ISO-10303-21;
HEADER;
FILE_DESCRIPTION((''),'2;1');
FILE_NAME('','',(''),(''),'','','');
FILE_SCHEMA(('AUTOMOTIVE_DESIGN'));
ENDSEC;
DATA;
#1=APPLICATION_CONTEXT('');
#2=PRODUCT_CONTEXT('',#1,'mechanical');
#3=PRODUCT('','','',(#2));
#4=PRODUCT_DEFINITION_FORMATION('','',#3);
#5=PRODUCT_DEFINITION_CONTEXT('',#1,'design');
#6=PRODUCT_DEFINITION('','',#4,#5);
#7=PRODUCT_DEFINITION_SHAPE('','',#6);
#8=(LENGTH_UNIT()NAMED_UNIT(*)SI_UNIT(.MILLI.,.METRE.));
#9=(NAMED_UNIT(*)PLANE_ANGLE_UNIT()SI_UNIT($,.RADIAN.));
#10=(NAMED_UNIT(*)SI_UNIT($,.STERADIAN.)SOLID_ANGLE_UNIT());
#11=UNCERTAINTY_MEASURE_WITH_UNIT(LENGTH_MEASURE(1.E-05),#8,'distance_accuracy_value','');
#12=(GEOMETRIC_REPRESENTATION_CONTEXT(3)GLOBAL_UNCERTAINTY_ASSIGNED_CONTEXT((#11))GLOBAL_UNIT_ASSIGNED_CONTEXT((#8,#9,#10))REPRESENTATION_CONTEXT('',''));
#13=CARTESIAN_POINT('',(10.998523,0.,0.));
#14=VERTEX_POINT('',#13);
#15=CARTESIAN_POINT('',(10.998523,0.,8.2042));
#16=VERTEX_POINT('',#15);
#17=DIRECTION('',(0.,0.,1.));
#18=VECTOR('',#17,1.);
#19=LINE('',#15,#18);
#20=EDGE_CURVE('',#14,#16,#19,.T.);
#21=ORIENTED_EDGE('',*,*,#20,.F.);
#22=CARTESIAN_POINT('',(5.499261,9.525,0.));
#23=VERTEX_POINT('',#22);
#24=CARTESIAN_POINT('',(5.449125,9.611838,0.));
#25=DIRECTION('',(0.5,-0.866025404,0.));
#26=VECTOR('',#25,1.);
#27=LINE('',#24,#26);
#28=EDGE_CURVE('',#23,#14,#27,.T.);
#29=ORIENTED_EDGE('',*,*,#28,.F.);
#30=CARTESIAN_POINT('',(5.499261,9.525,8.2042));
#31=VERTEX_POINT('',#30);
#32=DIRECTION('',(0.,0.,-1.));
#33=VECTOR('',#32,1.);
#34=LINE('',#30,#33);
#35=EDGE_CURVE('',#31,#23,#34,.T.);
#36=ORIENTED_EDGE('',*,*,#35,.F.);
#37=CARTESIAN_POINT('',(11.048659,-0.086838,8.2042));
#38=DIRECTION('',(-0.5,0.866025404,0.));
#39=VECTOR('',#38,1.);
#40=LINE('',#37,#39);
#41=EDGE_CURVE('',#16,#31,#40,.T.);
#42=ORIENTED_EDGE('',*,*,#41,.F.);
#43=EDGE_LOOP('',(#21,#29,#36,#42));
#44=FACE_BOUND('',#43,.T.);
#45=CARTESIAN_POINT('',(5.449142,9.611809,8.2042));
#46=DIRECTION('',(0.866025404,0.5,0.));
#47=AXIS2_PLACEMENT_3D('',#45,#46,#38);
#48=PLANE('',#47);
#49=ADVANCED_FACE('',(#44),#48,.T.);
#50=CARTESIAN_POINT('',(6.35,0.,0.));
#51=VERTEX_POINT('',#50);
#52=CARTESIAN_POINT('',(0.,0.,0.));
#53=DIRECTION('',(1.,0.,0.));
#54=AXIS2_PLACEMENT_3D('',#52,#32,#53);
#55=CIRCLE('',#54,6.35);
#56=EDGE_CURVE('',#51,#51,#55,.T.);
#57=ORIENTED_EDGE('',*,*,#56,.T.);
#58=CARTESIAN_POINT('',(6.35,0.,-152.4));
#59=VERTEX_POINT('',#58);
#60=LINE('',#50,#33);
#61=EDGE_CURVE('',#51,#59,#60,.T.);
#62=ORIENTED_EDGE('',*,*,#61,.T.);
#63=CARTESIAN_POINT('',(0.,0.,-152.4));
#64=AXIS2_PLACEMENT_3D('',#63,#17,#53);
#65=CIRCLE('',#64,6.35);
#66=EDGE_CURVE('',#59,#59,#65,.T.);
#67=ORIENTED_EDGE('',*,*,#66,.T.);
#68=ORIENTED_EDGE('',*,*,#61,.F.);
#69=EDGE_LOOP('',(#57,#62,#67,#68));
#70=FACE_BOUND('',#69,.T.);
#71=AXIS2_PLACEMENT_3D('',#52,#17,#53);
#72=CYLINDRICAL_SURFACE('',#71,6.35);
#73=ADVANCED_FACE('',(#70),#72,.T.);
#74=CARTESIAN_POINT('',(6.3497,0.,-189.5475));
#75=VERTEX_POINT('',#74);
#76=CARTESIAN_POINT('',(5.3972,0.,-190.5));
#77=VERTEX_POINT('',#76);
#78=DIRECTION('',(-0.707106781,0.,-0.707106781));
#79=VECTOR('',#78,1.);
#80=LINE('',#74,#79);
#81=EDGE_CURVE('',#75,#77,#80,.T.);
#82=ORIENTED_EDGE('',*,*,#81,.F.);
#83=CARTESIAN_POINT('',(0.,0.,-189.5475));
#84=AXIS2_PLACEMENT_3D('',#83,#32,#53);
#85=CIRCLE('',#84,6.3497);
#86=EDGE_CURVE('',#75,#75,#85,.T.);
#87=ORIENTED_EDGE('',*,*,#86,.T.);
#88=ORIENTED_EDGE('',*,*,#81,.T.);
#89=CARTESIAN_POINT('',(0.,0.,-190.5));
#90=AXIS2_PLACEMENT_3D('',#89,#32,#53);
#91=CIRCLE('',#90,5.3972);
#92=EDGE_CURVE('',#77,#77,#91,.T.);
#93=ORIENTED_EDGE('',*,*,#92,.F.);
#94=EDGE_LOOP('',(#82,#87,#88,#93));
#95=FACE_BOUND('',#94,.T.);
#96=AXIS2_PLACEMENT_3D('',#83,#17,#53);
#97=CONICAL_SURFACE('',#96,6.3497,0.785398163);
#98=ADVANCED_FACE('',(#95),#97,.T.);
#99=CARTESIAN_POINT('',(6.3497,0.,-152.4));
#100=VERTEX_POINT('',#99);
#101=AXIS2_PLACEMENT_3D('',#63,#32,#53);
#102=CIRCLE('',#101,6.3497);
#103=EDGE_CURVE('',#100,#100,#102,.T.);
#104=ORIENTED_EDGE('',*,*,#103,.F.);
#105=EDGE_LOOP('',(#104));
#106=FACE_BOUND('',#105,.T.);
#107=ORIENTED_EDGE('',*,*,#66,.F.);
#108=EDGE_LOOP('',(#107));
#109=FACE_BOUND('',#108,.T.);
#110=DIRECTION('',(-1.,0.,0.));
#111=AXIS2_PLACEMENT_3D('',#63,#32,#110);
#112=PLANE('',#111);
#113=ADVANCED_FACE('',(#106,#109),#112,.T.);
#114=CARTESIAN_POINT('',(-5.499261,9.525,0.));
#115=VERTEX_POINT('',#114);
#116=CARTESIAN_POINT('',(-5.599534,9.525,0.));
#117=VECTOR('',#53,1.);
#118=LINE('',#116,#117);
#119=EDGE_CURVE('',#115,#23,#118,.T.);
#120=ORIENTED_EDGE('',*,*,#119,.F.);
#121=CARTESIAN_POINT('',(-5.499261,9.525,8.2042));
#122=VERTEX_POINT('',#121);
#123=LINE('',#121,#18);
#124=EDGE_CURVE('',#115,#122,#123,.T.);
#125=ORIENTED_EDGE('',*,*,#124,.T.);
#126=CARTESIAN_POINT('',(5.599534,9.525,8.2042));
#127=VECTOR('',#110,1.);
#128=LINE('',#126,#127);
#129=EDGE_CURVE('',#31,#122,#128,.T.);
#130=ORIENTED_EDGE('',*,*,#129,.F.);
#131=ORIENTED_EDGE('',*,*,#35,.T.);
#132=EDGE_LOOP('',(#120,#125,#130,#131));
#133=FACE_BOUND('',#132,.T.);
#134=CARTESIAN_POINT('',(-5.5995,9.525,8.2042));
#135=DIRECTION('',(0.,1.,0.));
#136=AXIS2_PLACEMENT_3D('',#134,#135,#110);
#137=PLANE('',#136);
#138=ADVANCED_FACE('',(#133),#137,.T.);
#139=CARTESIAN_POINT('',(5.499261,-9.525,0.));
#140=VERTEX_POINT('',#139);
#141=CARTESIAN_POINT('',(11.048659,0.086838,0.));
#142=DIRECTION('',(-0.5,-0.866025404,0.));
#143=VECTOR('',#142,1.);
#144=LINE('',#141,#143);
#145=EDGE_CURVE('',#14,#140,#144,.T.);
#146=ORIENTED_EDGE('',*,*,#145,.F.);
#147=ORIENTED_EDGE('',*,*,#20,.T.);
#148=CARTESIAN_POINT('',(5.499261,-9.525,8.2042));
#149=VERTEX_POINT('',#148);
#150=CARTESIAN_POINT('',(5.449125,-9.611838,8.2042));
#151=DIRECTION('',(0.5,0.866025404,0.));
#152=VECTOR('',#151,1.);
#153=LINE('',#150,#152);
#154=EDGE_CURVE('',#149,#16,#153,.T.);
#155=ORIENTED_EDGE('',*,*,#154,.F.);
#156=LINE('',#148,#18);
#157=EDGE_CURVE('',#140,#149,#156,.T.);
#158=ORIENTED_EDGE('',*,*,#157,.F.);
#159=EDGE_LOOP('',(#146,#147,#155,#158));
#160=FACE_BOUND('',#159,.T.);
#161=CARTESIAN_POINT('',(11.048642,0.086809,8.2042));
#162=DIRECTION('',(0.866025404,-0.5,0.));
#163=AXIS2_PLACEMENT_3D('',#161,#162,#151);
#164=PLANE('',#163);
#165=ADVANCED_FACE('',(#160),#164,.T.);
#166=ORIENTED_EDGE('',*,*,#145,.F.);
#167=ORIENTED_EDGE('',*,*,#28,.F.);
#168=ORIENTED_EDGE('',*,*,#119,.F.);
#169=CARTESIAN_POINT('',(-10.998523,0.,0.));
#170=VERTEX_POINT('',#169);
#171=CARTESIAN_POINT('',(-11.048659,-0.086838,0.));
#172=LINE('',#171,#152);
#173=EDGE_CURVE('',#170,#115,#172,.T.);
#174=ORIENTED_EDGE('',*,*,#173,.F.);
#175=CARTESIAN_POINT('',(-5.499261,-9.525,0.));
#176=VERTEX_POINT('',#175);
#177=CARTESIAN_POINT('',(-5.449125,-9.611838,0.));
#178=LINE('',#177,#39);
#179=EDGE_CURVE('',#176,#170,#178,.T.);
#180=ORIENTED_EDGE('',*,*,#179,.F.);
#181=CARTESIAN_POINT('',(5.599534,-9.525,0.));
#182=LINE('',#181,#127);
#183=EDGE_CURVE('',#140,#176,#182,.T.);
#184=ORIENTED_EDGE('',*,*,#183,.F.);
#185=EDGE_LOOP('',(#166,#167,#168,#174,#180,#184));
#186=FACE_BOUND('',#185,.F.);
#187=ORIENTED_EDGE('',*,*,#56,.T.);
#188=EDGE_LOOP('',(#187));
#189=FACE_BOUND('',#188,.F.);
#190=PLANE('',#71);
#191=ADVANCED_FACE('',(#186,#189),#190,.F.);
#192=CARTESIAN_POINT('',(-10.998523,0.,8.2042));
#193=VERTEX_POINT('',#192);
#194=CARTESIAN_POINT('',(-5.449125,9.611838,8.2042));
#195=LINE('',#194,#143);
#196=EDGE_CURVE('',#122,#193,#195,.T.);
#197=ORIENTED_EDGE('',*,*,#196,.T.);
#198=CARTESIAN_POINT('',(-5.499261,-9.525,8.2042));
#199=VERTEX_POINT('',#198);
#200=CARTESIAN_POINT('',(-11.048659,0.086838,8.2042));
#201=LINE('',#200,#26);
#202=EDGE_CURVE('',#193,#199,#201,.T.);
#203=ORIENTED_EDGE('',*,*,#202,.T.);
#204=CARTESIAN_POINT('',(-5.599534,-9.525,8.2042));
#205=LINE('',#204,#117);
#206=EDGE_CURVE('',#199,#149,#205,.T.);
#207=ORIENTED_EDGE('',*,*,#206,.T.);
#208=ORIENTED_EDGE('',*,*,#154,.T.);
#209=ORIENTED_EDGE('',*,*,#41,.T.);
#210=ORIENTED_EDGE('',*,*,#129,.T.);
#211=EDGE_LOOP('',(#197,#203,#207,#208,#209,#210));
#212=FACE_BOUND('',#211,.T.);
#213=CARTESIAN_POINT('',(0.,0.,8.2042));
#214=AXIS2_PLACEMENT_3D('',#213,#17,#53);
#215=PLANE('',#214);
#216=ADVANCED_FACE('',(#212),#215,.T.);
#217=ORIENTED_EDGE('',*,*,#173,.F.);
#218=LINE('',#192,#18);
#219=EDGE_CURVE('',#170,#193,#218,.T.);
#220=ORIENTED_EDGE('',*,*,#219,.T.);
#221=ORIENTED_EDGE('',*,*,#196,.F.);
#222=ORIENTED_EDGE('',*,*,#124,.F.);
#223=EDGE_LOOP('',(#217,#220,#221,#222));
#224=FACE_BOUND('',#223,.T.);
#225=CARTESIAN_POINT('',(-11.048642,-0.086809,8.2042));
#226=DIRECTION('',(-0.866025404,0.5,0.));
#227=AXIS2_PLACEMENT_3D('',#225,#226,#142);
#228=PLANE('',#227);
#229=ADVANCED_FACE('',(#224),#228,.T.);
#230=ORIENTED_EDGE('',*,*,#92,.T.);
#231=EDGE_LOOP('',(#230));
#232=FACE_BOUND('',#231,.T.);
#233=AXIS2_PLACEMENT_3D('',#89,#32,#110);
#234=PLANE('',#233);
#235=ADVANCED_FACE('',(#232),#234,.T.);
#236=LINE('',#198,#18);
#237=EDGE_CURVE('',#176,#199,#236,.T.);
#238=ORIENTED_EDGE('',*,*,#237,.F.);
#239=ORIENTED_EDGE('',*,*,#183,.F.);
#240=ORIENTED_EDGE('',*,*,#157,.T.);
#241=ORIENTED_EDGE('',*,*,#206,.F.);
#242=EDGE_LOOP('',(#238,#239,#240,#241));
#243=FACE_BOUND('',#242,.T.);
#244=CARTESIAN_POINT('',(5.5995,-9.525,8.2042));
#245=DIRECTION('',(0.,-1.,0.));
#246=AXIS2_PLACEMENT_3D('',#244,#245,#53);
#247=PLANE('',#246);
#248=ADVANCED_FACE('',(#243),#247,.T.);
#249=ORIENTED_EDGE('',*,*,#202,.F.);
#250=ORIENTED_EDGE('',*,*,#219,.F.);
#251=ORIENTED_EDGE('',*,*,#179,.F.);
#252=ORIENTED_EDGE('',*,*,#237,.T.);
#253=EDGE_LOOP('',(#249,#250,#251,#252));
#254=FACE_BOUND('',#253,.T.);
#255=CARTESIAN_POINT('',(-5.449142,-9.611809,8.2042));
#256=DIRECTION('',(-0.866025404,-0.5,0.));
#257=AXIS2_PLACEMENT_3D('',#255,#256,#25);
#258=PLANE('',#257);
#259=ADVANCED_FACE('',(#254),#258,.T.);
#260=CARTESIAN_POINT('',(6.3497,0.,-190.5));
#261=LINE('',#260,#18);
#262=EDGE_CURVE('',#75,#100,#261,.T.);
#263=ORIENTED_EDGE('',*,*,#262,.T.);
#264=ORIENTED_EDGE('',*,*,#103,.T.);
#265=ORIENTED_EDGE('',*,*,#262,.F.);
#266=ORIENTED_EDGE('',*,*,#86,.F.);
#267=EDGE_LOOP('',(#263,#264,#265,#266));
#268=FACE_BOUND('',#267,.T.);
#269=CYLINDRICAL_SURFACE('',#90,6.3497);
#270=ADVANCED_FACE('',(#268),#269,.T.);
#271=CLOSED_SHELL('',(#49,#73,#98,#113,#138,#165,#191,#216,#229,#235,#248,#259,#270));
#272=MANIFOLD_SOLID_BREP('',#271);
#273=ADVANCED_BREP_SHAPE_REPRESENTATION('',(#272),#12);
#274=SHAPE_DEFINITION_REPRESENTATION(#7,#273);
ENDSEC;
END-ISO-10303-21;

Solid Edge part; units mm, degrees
sketch "Sketch1" plane through (0, 0, 0) normal (0, 0, 1) x (1, 0, 0)
  circle A0 centre (0, 0) radius 11.049
  dimension "D1" = 22.098
extrude "Protrusion1" add sketch "Sketch1" along normal blind 8.2042
sketch "Sketch2" plane through (0, 0, 0) normal (0, 0, -1) x (1, 0, 0)
  circle A0 centre (0, 0) radius 6.35
extrude "Protrusion2" add sketch "Sketch2" along normal blind 190.5
sketch "Sketch3" plane through (0, 0, -190.5) normal (0, 0, -1) x (1, 0, 0)
  circle A0 centre (0, 0) radius 6.3497
extrude "Cutout1" cut sketch "Sketch3" against normal blind 38.1 flip side to cut
chamfer "Chamfer_1" distance 0.9525 angle 45 1 edges at (-6.3497, 0, -190.5)
sketch "Sketch4" plane through (0, 0, 8.2042) normal (0, 0, 1) x (1, 0, 0)
  line L0 (-5.5995, 9.525) -> (5.5995, 9.525)
  dimension "D1" = 19.05
extrude "Cutout2" cut sketch "Sketch4" against normal up to next material side at (0, 9.575, 8.2042)
pattern_circular "Pattern1" count 6 over 360 about axis through (0, 0, 8.2042) along (0, 0, 1) of "Cutout2"
properties part number "24102181"
